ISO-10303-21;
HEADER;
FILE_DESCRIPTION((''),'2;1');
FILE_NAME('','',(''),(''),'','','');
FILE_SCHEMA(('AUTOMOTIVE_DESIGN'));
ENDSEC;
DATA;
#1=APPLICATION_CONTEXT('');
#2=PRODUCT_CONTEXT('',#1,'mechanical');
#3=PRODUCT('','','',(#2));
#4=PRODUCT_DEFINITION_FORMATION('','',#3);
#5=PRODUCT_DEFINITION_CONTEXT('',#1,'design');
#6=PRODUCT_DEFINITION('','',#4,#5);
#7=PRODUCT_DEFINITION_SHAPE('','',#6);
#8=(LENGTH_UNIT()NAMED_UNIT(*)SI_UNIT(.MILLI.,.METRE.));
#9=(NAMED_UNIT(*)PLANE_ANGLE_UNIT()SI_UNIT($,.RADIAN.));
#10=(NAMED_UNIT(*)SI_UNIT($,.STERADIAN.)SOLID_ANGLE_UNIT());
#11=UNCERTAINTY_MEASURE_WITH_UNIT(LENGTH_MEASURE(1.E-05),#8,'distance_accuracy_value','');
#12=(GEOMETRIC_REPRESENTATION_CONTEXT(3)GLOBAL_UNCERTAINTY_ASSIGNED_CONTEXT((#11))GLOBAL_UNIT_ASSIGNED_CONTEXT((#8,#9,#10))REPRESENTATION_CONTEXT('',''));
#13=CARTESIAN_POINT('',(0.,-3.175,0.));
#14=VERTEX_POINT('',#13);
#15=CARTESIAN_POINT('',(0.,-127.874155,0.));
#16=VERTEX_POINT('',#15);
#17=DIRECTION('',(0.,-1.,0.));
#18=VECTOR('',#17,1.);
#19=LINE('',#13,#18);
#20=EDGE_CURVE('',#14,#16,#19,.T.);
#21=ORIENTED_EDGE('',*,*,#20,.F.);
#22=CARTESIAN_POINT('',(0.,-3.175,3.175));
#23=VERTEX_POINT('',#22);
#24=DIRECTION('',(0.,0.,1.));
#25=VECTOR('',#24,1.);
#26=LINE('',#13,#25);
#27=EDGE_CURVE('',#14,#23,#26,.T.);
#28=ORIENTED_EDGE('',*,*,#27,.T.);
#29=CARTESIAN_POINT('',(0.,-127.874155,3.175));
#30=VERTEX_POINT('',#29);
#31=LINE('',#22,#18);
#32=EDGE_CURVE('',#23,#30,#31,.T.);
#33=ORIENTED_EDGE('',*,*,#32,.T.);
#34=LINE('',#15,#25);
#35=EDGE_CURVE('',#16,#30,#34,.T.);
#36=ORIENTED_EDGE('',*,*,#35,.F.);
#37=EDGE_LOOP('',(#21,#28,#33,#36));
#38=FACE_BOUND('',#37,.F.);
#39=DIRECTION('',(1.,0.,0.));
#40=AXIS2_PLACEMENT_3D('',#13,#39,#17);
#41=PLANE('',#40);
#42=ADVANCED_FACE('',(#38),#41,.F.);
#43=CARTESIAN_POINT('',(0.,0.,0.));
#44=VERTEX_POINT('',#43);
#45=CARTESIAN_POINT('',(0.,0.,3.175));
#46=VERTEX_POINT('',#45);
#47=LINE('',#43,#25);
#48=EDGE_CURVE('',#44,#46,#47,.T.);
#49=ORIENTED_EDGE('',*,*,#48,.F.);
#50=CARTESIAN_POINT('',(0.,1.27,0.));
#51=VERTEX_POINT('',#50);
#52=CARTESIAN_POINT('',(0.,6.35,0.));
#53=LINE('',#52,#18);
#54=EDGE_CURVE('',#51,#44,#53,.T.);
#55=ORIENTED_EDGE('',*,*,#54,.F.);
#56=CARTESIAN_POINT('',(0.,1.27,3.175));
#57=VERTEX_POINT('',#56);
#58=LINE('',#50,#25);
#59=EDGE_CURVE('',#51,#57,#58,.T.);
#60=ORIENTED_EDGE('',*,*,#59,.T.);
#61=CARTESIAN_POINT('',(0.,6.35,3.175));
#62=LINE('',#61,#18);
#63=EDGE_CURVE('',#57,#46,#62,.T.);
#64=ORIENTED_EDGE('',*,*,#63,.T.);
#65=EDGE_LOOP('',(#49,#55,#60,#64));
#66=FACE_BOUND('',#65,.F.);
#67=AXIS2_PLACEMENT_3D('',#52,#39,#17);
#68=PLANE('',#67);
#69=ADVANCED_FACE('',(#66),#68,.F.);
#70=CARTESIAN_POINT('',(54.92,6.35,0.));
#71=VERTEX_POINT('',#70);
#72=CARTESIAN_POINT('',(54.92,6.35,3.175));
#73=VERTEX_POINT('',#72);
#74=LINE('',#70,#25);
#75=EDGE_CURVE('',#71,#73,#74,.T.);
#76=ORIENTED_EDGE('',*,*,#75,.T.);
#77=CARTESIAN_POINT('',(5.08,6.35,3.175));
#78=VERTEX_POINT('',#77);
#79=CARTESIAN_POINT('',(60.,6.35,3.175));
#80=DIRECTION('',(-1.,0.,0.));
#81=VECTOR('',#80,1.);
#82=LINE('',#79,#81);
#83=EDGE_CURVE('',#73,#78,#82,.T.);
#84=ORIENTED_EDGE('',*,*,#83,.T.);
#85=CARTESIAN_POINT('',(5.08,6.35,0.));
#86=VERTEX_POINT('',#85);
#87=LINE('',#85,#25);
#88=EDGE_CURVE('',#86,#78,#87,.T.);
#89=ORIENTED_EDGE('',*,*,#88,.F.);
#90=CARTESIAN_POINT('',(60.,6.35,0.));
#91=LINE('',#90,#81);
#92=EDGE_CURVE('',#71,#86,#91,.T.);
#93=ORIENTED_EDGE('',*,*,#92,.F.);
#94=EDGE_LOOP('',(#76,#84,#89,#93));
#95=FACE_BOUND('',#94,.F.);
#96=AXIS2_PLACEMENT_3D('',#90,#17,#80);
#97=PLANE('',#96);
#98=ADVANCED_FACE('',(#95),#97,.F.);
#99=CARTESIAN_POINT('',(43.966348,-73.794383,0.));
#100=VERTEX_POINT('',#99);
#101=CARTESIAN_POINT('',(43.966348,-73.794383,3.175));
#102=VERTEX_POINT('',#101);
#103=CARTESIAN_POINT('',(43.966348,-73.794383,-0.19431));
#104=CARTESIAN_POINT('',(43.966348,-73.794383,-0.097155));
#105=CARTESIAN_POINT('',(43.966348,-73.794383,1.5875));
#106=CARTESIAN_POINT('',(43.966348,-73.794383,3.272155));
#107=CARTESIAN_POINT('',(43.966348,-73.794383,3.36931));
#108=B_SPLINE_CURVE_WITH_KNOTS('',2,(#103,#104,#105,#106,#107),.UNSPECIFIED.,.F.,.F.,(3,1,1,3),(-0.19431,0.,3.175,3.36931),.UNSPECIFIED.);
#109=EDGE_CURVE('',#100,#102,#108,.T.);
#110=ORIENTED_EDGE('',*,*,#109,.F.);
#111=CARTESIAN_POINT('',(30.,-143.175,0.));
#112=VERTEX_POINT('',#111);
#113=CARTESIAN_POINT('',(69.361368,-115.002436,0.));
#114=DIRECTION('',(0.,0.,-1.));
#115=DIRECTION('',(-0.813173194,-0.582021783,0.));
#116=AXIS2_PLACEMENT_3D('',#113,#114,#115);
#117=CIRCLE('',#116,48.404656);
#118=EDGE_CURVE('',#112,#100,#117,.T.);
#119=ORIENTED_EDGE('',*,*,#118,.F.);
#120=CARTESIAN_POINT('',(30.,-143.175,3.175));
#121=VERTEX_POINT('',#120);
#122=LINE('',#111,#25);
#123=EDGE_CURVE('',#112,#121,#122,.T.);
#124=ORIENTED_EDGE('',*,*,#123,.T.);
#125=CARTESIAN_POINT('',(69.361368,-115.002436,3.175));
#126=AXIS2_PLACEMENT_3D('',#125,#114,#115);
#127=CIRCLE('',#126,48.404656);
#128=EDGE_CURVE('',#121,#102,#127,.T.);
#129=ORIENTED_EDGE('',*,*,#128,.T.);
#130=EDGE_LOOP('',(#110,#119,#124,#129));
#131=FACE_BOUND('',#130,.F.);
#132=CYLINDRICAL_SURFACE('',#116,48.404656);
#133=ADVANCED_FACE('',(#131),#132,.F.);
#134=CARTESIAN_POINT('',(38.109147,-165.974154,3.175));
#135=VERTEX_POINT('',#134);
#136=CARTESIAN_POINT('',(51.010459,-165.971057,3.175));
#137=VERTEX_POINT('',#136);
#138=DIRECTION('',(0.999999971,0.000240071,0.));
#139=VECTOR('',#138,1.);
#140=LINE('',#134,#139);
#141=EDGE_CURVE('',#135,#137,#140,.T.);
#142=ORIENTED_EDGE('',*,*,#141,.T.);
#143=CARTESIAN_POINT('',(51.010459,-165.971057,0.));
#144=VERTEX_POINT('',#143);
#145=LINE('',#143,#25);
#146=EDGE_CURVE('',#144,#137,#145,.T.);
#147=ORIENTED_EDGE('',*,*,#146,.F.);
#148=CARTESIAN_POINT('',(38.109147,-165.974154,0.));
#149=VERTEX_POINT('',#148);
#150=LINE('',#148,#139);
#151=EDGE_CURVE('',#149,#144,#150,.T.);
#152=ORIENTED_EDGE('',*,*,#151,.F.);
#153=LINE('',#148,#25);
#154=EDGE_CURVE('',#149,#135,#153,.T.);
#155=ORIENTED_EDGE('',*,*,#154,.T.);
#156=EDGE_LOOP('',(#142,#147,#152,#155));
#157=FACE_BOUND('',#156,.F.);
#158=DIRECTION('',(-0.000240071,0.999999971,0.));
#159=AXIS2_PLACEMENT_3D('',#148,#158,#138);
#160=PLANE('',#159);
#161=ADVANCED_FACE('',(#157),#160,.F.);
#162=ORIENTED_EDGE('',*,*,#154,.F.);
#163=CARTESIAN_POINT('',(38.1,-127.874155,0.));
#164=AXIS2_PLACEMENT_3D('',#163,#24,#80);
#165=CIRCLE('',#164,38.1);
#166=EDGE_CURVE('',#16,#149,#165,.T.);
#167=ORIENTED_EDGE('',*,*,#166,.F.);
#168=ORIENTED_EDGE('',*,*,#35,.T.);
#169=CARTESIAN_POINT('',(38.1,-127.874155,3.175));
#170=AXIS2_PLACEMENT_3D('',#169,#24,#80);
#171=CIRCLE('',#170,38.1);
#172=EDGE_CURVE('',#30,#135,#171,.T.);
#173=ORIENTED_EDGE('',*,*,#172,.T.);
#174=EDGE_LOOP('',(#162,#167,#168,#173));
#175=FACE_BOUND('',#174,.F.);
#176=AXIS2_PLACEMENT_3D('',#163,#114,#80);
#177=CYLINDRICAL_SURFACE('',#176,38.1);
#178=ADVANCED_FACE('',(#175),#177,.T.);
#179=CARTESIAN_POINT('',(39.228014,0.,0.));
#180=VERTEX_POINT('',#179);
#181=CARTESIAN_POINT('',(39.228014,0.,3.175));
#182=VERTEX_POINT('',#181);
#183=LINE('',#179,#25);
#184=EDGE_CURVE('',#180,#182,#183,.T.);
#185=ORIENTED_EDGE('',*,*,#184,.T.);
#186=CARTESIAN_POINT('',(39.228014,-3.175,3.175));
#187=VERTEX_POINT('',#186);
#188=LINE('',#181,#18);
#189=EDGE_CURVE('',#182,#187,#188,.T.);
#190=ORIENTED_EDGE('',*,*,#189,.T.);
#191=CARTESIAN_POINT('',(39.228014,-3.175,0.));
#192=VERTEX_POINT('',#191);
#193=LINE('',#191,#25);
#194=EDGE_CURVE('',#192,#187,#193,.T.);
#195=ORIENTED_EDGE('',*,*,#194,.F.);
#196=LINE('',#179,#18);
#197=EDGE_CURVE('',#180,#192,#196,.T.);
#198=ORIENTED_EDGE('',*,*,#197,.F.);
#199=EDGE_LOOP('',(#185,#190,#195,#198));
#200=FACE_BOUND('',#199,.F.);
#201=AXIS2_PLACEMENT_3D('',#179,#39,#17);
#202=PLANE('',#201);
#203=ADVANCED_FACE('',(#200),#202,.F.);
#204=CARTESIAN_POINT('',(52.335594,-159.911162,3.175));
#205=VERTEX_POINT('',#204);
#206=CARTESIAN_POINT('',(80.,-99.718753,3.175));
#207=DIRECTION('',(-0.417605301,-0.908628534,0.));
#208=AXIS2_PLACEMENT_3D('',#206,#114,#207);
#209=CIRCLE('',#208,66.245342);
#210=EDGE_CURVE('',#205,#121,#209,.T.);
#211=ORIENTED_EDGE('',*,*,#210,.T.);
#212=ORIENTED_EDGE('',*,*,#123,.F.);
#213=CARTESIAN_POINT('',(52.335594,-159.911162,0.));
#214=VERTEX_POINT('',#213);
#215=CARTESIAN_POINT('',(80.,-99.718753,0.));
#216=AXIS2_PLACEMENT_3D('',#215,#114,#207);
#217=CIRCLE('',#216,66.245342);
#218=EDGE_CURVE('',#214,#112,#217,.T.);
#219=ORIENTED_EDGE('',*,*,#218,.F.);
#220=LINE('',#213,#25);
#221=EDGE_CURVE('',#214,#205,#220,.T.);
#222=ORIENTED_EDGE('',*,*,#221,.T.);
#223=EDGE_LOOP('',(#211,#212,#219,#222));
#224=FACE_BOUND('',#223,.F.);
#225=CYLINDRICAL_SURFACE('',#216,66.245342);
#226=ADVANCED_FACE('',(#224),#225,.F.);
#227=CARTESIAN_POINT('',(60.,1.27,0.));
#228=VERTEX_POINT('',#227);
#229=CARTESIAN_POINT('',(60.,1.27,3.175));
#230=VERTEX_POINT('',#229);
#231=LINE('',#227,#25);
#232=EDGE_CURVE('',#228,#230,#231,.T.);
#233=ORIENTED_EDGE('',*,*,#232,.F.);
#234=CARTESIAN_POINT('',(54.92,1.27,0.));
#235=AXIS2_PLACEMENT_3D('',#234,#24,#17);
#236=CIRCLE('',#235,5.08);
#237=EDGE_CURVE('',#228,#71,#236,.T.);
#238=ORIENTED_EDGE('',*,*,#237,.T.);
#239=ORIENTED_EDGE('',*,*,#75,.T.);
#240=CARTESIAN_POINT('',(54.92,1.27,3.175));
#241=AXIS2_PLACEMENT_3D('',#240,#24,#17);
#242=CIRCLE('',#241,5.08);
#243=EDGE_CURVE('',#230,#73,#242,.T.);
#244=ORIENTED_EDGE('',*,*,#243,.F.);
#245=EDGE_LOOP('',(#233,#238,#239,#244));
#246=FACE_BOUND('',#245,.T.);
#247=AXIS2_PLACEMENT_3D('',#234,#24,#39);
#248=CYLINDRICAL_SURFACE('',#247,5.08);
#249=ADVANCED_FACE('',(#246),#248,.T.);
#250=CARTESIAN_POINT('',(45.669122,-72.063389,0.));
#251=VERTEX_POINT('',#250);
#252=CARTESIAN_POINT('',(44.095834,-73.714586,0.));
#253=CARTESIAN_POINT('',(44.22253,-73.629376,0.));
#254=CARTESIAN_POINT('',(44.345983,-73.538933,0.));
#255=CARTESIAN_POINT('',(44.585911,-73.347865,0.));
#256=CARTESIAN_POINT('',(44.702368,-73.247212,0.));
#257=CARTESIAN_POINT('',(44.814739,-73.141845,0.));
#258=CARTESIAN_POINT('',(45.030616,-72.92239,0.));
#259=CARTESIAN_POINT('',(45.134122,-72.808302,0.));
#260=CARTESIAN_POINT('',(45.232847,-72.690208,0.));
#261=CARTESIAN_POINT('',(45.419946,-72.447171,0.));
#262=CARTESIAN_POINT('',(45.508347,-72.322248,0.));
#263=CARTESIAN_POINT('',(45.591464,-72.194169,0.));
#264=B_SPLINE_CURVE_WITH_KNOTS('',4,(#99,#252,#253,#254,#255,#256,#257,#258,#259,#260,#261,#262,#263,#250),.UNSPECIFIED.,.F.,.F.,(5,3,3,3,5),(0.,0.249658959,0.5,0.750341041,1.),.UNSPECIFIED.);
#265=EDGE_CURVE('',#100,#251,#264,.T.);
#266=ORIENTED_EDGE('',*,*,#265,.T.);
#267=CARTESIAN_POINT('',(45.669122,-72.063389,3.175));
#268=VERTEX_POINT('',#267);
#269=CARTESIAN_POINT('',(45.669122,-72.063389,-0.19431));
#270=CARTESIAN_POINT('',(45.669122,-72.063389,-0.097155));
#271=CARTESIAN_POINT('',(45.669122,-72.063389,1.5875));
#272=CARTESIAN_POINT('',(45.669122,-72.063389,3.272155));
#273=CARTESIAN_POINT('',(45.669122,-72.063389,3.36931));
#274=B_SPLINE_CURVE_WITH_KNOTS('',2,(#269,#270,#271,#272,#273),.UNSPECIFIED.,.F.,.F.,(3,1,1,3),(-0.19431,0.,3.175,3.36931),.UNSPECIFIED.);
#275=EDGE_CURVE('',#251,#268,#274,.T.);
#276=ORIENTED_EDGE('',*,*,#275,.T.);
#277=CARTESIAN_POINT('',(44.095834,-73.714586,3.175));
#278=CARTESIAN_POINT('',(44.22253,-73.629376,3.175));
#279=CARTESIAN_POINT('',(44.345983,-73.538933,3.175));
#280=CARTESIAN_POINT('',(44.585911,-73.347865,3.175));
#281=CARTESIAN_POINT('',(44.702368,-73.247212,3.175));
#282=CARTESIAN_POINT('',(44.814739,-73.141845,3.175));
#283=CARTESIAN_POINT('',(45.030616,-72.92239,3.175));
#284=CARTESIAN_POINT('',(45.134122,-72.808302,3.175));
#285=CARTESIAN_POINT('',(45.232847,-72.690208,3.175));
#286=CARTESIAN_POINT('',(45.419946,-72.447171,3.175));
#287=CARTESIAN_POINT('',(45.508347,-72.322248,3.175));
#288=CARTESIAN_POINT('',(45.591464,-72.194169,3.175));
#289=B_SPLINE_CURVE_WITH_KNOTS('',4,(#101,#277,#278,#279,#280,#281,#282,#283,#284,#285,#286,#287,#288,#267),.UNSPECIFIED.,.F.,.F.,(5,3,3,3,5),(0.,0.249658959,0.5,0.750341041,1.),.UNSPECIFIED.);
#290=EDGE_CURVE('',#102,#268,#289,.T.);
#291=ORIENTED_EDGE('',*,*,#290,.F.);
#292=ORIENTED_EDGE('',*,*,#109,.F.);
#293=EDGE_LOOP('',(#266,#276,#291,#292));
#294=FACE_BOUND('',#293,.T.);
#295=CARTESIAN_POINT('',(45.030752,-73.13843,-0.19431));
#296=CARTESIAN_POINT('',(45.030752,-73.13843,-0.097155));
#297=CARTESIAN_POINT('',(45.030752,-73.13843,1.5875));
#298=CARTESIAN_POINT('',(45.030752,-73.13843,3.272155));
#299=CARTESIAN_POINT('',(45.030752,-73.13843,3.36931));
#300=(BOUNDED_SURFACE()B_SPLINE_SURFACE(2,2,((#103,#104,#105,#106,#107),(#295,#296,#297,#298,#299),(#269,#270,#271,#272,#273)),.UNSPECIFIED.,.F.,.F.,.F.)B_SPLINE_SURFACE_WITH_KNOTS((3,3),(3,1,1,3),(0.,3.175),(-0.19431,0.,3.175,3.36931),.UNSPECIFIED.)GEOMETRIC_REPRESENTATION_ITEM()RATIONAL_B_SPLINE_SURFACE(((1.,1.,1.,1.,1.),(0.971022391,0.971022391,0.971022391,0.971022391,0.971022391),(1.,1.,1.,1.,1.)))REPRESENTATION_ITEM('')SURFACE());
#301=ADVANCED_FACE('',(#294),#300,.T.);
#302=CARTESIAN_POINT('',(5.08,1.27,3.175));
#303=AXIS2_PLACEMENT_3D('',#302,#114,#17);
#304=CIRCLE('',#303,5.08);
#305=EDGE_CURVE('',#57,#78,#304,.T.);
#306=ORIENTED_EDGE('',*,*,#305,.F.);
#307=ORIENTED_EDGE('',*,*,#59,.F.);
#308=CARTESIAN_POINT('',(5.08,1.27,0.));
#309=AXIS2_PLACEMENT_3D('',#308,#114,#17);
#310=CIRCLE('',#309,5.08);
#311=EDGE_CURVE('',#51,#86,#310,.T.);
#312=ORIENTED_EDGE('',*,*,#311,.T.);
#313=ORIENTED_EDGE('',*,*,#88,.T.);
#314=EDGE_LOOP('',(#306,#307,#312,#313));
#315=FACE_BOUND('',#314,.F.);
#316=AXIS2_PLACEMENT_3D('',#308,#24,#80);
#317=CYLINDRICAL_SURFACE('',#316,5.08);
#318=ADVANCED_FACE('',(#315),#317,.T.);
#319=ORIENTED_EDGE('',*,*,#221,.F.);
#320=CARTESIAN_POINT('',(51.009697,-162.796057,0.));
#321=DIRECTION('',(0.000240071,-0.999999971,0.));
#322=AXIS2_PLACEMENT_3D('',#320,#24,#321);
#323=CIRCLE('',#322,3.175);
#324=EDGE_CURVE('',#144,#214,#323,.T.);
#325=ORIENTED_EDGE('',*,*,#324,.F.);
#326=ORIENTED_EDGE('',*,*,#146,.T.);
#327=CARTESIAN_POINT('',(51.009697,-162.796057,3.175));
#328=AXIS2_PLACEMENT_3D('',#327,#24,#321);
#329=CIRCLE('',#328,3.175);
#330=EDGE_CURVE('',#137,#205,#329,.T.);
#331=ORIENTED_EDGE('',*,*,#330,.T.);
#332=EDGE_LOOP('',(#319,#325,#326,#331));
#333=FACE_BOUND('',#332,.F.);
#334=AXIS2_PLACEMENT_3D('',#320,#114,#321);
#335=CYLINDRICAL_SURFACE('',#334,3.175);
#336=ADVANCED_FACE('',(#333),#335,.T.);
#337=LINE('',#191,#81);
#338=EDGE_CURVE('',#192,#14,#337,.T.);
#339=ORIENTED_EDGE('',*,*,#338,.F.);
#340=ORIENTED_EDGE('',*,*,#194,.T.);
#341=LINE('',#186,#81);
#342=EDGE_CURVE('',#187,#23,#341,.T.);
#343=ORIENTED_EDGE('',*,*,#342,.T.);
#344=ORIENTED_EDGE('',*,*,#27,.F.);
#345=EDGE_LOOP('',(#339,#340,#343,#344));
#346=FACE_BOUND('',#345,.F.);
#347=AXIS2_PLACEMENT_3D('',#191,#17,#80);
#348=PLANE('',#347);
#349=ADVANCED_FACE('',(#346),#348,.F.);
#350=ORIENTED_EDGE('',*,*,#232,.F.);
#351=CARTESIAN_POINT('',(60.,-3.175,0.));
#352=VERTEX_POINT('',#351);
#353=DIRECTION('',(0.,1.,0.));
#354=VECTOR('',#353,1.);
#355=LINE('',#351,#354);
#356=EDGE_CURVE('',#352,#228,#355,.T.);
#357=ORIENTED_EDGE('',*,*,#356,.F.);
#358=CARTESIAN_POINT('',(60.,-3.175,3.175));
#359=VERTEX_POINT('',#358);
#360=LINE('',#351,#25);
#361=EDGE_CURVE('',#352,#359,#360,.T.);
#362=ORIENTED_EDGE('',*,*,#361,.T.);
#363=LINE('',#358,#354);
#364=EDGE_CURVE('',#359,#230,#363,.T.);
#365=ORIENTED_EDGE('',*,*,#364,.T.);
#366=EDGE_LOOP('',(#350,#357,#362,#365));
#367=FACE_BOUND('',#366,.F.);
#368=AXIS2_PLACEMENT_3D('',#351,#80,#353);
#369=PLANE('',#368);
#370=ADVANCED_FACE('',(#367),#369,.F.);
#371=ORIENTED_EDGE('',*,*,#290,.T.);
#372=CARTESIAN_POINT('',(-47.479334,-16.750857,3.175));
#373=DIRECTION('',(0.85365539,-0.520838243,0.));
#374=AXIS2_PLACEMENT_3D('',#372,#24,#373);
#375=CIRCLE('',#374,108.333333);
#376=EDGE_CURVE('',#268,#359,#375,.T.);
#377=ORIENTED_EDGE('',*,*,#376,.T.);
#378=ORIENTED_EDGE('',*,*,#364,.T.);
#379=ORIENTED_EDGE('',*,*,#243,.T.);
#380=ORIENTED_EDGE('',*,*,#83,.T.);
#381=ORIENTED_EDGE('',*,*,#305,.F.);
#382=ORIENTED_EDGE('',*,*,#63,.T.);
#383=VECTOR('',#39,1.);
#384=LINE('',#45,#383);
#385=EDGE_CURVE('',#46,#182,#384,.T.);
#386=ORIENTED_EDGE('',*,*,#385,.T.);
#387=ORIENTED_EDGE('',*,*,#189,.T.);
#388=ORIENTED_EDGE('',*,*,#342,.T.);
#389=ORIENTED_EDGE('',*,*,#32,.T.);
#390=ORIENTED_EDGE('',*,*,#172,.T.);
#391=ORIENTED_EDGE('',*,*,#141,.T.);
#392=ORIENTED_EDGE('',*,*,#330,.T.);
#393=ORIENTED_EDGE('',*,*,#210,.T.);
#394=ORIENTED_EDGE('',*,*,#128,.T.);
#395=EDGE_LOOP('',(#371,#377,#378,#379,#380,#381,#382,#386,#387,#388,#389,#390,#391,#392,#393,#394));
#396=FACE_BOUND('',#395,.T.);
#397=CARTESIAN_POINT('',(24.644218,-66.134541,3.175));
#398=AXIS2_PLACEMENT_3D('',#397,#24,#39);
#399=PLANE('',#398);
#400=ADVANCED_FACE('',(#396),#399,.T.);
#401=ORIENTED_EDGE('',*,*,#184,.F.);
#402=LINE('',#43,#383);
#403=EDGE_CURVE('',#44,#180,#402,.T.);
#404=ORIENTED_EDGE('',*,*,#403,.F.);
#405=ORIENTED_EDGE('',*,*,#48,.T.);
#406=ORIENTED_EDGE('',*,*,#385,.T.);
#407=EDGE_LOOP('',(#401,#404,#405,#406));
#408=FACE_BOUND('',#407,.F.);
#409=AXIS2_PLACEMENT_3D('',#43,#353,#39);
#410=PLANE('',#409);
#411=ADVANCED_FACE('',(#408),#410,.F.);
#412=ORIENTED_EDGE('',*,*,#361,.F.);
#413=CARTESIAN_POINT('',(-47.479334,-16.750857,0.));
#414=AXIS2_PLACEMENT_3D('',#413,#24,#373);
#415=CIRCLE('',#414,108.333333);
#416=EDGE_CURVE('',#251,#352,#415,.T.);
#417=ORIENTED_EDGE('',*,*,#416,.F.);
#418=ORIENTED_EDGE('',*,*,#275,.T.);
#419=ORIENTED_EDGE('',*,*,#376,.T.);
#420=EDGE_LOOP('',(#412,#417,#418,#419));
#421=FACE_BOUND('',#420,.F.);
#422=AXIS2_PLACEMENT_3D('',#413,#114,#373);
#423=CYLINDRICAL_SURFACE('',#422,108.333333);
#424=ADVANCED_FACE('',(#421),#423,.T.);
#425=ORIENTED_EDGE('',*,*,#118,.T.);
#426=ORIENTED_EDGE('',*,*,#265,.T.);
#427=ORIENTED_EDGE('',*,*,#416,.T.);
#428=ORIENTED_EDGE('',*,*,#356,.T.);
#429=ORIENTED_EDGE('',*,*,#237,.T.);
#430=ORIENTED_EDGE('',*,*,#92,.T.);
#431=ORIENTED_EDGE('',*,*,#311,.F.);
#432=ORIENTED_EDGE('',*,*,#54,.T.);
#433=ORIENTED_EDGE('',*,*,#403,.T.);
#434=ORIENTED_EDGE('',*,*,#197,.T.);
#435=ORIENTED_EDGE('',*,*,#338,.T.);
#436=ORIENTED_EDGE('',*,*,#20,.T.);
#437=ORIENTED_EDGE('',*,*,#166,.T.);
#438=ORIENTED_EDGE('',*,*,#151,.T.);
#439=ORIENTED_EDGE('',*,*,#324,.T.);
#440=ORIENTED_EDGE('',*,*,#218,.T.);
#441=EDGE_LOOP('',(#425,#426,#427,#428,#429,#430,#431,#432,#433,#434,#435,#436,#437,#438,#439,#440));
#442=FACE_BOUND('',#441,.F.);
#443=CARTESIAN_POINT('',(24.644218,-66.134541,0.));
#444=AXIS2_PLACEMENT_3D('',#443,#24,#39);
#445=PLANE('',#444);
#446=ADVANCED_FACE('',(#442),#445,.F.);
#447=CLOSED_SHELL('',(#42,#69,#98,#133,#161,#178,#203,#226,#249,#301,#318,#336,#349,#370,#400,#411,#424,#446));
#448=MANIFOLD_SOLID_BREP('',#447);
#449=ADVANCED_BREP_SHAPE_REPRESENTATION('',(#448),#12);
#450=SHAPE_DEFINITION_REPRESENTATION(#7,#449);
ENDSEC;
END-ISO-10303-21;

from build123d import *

# Parameters (mm, degrees)
F1_DEPTH = 3.175
F2_R     = 5.08


# Not quite as in the source:
# - a length typed as a fraction of an inch, garbled in the dataset ("3 / 203.2 mm" for 3/8 in), is restored


with BuildPart() as f1:
    # F0 (on Top) → F1 (new body)
    with BuildSketch(Plane.XY):
        with BuildLine():
            Line((0, 6.35), (0, 0))
            Line((0, 0), (39.228014, 0))
            Line((39.228014, 0), (39.228014, -3.175))
            Line((39.228014, -3.175), (0, -3.175))
            Line((0, -3.175), (0, -30.5298216847))
            Line((0, -30.5298216847), (0, -127.8741553825))
            ThreePointArc((0, -127.8741553825), (11.1624656807, -154.8181574015), (38.1091467085, -165.9741542846))
            Line((38.1091467085, -165.9741542846), (51.0104592901, -165.9710570523))
            ThreePointArc((51.0104592901, -165.9710570523), (54.1114045686, -163.4743163552), (52.3355938941, -159.9111615484))
            ThreePointArc((52.3355938941, -159.9111615484), (40.2763953072, -152.7327194477), (30, -143.175))
            ThreePointArc((30, -143.175), (22.0311793243, -104.8602527123), (45, -73.175))
            ThreePointArc((45, -73.175), (58.4492609505, -39.4498416322), (60, -3.175))
            Line((60, -3.175), (60, 0))
            Line((60, 0), (60, 6.35))
            Line((60, 6.35), (39.228014, 6.35))
            Line((39.228014, 6.35), (0, 6.35))
        make_face()
    extrude(amount=F1_DEPTH)

    # F2
    f2_edges = [f1.edges().sort_by_distance(p)[0] for p in [
        (60, 6.35, 1.5875),
        (0, 6.35, 1.5875),
        (45, -73.175, 1.5875),
    ]]
    fillet(f2_edges, radius=F2_R)


solid = f1.part
